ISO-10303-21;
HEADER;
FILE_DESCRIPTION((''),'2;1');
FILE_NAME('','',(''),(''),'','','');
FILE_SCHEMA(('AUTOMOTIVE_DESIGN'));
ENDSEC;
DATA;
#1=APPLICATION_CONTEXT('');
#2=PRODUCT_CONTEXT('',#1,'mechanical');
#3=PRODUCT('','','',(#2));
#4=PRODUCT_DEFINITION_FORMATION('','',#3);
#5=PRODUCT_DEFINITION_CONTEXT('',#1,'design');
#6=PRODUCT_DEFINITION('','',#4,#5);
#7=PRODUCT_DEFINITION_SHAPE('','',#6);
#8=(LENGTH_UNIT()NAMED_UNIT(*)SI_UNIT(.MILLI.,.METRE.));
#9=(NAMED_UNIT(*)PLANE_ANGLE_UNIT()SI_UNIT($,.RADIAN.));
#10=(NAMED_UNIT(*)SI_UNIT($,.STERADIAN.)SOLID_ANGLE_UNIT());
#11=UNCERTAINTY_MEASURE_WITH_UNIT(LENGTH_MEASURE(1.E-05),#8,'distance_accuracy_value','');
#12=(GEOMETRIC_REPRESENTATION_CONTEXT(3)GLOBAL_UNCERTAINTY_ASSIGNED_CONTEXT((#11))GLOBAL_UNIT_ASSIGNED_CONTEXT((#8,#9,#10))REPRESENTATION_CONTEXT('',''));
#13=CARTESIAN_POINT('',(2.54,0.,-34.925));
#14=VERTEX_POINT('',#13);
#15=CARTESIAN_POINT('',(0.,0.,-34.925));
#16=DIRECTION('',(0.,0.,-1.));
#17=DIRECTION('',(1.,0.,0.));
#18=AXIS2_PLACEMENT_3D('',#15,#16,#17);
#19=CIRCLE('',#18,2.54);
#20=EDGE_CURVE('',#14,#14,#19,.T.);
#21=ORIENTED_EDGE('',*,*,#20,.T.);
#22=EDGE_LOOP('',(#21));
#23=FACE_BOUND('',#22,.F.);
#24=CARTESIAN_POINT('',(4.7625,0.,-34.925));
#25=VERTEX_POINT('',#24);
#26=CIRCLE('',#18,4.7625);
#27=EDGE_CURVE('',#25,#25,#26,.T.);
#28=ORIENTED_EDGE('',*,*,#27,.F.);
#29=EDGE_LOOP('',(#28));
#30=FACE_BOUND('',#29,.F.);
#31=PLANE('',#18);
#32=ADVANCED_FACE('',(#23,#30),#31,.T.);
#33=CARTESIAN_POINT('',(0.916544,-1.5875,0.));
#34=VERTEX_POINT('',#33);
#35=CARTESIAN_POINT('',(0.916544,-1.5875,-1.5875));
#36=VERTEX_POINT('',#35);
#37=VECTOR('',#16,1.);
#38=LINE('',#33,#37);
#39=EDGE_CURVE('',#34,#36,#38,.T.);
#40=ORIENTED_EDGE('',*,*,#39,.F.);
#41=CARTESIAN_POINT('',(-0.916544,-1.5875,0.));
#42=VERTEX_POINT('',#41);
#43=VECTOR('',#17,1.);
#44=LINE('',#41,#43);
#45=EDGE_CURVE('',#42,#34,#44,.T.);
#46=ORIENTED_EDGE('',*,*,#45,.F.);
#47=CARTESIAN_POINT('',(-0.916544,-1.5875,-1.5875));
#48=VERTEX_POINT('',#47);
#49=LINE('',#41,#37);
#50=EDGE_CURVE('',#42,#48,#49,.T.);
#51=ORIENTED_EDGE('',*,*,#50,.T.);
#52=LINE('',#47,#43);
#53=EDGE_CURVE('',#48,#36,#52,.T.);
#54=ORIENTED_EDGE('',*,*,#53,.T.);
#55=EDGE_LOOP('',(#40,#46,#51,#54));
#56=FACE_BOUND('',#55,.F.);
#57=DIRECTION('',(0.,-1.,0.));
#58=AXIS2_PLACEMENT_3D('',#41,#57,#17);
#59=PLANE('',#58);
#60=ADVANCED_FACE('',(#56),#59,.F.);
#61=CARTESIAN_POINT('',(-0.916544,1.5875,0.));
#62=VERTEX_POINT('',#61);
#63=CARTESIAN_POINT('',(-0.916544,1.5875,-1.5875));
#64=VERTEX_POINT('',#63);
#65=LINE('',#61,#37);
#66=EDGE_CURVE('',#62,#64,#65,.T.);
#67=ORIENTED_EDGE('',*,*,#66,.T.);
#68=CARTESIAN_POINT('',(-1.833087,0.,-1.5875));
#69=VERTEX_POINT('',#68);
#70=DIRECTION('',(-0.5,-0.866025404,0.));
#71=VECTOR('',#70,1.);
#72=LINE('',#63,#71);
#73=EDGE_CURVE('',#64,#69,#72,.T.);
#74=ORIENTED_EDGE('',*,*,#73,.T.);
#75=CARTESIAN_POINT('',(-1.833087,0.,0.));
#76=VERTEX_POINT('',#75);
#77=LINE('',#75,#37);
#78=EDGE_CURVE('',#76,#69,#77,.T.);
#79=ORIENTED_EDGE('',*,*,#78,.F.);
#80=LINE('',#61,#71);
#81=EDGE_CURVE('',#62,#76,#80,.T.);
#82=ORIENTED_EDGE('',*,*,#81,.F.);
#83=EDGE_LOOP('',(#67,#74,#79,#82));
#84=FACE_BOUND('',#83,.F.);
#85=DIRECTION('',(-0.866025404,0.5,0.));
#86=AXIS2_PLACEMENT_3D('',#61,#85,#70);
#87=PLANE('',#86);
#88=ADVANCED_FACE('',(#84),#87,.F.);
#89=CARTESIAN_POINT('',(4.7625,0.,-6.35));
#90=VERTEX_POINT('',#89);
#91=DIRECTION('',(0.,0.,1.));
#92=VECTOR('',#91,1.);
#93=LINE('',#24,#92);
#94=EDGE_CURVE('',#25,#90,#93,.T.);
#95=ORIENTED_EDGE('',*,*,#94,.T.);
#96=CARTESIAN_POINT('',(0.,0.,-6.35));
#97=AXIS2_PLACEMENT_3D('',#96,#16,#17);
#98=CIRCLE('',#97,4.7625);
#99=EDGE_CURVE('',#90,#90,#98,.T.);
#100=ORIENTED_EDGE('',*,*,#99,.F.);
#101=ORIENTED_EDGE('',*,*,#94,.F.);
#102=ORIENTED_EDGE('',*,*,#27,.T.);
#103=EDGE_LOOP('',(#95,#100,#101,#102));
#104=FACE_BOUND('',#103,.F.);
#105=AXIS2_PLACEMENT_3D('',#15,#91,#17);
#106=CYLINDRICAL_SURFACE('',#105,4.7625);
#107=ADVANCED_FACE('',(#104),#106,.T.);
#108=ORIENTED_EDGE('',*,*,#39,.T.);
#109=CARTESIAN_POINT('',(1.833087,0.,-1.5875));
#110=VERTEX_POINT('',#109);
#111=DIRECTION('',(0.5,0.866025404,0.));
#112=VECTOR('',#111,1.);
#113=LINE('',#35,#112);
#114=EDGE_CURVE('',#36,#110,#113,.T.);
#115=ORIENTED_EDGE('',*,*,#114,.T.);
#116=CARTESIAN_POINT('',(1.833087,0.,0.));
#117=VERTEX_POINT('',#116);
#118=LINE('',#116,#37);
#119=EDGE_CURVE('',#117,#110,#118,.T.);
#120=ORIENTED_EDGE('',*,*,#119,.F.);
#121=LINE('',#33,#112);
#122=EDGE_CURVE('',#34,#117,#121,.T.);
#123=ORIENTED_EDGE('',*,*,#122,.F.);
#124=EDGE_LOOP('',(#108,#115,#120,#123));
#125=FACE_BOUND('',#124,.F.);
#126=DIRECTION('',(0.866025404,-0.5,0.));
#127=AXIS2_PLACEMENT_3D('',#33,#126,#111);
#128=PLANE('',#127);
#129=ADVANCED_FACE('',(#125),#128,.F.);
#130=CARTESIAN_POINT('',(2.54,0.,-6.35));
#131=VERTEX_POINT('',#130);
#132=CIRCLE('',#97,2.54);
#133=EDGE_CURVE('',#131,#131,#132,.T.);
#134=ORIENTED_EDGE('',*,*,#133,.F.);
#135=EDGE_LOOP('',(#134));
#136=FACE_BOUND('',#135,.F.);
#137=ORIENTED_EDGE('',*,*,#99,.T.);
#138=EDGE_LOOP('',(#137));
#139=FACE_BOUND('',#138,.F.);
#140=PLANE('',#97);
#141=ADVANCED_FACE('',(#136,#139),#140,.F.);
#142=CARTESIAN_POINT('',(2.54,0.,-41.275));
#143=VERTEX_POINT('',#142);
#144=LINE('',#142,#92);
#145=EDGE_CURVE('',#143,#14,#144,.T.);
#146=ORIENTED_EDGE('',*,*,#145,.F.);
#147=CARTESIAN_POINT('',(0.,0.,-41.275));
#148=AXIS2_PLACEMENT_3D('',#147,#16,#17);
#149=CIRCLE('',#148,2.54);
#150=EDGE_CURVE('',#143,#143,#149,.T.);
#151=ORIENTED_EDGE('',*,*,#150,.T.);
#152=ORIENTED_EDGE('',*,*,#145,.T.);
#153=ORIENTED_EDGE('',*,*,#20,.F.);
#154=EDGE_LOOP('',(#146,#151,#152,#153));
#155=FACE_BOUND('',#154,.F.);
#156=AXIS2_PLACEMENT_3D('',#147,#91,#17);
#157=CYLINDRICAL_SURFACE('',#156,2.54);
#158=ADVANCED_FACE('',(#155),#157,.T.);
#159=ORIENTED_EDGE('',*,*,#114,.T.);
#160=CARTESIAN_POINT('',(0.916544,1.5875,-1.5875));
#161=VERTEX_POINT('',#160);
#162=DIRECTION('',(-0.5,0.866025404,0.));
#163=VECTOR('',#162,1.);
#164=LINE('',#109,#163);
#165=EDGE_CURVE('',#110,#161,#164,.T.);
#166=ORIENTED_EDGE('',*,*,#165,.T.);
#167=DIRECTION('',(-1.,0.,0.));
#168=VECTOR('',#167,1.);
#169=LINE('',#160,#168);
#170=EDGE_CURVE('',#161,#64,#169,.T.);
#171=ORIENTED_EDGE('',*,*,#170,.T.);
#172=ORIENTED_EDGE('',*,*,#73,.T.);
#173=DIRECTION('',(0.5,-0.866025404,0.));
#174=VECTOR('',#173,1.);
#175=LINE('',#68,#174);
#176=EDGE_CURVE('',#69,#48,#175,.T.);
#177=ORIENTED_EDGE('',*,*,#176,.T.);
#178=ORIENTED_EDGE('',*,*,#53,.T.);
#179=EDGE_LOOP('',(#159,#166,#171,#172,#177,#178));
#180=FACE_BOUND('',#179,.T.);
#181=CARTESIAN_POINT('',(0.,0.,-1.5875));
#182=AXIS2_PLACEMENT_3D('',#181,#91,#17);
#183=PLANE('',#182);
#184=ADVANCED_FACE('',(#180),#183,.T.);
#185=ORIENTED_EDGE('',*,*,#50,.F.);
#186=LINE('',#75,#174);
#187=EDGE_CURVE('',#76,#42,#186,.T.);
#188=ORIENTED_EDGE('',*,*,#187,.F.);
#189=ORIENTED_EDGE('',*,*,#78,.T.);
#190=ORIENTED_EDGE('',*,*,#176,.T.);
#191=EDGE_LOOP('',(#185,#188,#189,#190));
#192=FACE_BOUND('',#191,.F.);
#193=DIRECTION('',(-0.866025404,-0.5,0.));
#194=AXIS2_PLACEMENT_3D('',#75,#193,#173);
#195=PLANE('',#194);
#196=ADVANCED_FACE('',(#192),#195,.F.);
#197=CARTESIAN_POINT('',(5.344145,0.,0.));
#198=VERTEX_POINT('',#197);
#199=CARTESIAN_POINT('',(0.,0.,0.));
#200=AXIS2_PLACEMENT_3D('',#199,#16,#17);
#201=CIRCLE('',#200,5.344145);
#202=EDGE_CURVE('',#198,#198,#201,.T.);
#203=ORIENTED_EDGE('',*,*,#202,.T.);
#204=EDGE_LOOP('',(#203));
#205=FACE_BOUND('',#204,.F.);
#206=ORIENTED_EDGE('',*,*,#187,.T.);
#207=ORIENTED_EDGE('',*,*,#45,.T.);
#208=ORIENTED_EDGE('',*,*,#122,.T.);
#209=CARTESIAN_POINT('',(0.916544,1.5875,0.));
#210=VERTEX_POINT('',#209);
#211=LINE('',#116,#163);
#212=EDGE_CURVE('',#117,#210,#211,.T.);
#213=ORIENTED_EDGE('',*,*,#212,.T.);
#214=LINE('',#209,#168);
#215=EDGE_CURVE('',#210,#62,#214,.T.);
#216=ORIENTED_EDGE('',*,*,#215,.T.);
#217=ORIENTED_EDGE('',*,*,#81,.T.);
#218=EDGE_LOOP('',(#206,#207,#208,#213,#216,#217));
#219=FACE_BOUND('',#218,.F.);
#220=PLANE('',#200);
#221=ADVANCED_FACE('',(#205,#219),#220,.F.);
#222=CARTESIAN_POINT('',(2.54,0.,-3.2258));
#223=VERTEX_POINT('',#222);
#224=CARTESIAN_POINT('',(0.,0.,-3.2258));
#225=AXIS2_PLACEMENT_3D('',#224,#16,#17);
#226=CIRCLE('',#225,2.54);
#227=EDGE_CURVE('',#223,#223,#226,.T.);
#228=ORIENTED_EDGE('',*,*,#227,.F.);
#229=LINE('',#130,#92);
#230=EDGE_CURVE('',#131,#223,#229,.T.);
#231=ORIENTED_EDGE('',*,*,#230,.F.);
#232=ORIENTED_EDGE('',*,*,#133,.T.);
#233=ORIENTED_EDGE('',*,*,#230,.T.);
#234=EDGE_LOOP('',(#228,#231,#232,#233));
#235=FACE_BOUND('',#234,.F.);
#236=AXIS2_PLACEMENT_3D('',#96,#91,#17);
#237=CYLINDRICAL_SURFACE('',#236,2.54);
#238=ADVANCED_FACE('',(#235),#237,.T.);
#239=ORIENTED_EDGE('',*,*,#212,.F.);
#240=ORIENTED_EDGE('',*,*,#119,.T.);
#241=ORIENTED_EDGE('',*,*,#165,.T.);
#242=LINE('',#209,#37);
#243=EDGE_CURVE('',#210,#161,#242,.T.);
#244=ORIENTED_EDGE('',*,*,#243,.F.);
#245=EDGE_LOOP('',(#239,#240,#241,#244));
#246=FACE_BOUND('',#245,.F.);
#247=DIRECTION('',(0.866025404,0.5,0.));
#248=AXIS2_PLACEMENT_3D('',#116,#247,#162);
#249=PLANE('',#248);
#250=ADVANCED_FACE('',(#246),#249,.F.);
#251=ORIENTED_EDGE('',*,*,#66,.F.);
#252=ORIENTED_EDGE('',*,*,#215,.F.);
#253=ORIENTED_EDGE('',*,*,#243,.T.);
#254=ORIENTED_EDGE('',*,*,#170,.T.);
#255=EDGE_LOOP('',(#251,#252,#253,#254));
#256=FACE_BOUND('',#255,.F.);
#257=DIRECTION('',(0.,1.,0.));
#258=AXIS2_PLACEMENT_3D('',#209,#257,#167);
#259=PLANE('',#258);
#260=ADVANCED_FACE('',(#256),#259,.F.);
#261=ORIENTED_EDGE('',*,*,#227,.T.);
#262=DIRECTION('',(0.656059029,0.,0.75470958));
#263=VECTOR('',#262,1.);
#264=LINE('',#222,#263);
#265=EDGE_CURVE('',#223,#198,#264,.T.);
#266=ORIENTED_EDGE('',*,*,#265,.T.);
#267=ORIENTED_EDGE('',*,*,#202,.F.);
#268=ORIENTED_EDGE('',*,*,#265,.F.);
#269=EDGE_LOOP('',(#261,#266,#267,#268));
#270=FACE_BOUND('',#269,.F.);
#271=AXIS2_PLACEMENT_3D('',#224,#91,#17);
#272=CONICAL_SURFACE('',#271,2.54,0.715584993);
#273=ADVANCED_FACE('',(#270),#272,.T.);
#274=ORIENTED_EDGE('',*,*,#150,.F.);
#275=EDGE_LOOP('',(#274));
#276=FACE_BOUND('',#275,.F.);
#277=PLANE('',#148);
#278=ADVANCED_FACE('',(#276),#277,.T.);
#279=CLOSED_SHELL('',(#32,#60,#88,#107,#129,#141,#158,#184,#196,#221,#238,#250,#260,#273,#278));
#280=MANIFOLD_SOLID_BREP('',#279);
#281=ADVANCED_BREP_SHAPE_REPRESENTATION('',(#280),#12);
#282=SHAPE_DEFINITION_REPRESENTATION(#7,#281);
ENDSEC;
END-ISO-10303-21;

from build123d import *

# Parameters (mm, degrees)
F3_DEPTH = 1.5875


with BuildPart() as f1:
    # F0 (on Front) → F1 (revolve)
    with BuildSketch(Plane.XZ):
        Polygon((5.3441451588, 0), (0, 0), (0, -3.2258), (0, -41.275), (2.54, -41.275), (2.54, -34.925), (4.7625, -34.925), (4.7625, -6.35), (2.54, -6.35), (2.54, -3.2258), align=None)
    revolve(axis=Axis((0, 0, -22.2504), (0, 0, -1)))

    # F2 (on face) → F3 (cut)
    with BuildSketch(Plane.XY):
        Polygon((0.9165435523, 1.5875), (-0.9165435523, 1.5875), (-1.8330871047, 0), (-0.9165435523, -1.5875), (0.9165435523, -1.5875), (1.8330871047, 0), align=None)
    extrude(amount=-F3_DEPTH, mode=Mode.SUBTRACT)


solid = f1.part
